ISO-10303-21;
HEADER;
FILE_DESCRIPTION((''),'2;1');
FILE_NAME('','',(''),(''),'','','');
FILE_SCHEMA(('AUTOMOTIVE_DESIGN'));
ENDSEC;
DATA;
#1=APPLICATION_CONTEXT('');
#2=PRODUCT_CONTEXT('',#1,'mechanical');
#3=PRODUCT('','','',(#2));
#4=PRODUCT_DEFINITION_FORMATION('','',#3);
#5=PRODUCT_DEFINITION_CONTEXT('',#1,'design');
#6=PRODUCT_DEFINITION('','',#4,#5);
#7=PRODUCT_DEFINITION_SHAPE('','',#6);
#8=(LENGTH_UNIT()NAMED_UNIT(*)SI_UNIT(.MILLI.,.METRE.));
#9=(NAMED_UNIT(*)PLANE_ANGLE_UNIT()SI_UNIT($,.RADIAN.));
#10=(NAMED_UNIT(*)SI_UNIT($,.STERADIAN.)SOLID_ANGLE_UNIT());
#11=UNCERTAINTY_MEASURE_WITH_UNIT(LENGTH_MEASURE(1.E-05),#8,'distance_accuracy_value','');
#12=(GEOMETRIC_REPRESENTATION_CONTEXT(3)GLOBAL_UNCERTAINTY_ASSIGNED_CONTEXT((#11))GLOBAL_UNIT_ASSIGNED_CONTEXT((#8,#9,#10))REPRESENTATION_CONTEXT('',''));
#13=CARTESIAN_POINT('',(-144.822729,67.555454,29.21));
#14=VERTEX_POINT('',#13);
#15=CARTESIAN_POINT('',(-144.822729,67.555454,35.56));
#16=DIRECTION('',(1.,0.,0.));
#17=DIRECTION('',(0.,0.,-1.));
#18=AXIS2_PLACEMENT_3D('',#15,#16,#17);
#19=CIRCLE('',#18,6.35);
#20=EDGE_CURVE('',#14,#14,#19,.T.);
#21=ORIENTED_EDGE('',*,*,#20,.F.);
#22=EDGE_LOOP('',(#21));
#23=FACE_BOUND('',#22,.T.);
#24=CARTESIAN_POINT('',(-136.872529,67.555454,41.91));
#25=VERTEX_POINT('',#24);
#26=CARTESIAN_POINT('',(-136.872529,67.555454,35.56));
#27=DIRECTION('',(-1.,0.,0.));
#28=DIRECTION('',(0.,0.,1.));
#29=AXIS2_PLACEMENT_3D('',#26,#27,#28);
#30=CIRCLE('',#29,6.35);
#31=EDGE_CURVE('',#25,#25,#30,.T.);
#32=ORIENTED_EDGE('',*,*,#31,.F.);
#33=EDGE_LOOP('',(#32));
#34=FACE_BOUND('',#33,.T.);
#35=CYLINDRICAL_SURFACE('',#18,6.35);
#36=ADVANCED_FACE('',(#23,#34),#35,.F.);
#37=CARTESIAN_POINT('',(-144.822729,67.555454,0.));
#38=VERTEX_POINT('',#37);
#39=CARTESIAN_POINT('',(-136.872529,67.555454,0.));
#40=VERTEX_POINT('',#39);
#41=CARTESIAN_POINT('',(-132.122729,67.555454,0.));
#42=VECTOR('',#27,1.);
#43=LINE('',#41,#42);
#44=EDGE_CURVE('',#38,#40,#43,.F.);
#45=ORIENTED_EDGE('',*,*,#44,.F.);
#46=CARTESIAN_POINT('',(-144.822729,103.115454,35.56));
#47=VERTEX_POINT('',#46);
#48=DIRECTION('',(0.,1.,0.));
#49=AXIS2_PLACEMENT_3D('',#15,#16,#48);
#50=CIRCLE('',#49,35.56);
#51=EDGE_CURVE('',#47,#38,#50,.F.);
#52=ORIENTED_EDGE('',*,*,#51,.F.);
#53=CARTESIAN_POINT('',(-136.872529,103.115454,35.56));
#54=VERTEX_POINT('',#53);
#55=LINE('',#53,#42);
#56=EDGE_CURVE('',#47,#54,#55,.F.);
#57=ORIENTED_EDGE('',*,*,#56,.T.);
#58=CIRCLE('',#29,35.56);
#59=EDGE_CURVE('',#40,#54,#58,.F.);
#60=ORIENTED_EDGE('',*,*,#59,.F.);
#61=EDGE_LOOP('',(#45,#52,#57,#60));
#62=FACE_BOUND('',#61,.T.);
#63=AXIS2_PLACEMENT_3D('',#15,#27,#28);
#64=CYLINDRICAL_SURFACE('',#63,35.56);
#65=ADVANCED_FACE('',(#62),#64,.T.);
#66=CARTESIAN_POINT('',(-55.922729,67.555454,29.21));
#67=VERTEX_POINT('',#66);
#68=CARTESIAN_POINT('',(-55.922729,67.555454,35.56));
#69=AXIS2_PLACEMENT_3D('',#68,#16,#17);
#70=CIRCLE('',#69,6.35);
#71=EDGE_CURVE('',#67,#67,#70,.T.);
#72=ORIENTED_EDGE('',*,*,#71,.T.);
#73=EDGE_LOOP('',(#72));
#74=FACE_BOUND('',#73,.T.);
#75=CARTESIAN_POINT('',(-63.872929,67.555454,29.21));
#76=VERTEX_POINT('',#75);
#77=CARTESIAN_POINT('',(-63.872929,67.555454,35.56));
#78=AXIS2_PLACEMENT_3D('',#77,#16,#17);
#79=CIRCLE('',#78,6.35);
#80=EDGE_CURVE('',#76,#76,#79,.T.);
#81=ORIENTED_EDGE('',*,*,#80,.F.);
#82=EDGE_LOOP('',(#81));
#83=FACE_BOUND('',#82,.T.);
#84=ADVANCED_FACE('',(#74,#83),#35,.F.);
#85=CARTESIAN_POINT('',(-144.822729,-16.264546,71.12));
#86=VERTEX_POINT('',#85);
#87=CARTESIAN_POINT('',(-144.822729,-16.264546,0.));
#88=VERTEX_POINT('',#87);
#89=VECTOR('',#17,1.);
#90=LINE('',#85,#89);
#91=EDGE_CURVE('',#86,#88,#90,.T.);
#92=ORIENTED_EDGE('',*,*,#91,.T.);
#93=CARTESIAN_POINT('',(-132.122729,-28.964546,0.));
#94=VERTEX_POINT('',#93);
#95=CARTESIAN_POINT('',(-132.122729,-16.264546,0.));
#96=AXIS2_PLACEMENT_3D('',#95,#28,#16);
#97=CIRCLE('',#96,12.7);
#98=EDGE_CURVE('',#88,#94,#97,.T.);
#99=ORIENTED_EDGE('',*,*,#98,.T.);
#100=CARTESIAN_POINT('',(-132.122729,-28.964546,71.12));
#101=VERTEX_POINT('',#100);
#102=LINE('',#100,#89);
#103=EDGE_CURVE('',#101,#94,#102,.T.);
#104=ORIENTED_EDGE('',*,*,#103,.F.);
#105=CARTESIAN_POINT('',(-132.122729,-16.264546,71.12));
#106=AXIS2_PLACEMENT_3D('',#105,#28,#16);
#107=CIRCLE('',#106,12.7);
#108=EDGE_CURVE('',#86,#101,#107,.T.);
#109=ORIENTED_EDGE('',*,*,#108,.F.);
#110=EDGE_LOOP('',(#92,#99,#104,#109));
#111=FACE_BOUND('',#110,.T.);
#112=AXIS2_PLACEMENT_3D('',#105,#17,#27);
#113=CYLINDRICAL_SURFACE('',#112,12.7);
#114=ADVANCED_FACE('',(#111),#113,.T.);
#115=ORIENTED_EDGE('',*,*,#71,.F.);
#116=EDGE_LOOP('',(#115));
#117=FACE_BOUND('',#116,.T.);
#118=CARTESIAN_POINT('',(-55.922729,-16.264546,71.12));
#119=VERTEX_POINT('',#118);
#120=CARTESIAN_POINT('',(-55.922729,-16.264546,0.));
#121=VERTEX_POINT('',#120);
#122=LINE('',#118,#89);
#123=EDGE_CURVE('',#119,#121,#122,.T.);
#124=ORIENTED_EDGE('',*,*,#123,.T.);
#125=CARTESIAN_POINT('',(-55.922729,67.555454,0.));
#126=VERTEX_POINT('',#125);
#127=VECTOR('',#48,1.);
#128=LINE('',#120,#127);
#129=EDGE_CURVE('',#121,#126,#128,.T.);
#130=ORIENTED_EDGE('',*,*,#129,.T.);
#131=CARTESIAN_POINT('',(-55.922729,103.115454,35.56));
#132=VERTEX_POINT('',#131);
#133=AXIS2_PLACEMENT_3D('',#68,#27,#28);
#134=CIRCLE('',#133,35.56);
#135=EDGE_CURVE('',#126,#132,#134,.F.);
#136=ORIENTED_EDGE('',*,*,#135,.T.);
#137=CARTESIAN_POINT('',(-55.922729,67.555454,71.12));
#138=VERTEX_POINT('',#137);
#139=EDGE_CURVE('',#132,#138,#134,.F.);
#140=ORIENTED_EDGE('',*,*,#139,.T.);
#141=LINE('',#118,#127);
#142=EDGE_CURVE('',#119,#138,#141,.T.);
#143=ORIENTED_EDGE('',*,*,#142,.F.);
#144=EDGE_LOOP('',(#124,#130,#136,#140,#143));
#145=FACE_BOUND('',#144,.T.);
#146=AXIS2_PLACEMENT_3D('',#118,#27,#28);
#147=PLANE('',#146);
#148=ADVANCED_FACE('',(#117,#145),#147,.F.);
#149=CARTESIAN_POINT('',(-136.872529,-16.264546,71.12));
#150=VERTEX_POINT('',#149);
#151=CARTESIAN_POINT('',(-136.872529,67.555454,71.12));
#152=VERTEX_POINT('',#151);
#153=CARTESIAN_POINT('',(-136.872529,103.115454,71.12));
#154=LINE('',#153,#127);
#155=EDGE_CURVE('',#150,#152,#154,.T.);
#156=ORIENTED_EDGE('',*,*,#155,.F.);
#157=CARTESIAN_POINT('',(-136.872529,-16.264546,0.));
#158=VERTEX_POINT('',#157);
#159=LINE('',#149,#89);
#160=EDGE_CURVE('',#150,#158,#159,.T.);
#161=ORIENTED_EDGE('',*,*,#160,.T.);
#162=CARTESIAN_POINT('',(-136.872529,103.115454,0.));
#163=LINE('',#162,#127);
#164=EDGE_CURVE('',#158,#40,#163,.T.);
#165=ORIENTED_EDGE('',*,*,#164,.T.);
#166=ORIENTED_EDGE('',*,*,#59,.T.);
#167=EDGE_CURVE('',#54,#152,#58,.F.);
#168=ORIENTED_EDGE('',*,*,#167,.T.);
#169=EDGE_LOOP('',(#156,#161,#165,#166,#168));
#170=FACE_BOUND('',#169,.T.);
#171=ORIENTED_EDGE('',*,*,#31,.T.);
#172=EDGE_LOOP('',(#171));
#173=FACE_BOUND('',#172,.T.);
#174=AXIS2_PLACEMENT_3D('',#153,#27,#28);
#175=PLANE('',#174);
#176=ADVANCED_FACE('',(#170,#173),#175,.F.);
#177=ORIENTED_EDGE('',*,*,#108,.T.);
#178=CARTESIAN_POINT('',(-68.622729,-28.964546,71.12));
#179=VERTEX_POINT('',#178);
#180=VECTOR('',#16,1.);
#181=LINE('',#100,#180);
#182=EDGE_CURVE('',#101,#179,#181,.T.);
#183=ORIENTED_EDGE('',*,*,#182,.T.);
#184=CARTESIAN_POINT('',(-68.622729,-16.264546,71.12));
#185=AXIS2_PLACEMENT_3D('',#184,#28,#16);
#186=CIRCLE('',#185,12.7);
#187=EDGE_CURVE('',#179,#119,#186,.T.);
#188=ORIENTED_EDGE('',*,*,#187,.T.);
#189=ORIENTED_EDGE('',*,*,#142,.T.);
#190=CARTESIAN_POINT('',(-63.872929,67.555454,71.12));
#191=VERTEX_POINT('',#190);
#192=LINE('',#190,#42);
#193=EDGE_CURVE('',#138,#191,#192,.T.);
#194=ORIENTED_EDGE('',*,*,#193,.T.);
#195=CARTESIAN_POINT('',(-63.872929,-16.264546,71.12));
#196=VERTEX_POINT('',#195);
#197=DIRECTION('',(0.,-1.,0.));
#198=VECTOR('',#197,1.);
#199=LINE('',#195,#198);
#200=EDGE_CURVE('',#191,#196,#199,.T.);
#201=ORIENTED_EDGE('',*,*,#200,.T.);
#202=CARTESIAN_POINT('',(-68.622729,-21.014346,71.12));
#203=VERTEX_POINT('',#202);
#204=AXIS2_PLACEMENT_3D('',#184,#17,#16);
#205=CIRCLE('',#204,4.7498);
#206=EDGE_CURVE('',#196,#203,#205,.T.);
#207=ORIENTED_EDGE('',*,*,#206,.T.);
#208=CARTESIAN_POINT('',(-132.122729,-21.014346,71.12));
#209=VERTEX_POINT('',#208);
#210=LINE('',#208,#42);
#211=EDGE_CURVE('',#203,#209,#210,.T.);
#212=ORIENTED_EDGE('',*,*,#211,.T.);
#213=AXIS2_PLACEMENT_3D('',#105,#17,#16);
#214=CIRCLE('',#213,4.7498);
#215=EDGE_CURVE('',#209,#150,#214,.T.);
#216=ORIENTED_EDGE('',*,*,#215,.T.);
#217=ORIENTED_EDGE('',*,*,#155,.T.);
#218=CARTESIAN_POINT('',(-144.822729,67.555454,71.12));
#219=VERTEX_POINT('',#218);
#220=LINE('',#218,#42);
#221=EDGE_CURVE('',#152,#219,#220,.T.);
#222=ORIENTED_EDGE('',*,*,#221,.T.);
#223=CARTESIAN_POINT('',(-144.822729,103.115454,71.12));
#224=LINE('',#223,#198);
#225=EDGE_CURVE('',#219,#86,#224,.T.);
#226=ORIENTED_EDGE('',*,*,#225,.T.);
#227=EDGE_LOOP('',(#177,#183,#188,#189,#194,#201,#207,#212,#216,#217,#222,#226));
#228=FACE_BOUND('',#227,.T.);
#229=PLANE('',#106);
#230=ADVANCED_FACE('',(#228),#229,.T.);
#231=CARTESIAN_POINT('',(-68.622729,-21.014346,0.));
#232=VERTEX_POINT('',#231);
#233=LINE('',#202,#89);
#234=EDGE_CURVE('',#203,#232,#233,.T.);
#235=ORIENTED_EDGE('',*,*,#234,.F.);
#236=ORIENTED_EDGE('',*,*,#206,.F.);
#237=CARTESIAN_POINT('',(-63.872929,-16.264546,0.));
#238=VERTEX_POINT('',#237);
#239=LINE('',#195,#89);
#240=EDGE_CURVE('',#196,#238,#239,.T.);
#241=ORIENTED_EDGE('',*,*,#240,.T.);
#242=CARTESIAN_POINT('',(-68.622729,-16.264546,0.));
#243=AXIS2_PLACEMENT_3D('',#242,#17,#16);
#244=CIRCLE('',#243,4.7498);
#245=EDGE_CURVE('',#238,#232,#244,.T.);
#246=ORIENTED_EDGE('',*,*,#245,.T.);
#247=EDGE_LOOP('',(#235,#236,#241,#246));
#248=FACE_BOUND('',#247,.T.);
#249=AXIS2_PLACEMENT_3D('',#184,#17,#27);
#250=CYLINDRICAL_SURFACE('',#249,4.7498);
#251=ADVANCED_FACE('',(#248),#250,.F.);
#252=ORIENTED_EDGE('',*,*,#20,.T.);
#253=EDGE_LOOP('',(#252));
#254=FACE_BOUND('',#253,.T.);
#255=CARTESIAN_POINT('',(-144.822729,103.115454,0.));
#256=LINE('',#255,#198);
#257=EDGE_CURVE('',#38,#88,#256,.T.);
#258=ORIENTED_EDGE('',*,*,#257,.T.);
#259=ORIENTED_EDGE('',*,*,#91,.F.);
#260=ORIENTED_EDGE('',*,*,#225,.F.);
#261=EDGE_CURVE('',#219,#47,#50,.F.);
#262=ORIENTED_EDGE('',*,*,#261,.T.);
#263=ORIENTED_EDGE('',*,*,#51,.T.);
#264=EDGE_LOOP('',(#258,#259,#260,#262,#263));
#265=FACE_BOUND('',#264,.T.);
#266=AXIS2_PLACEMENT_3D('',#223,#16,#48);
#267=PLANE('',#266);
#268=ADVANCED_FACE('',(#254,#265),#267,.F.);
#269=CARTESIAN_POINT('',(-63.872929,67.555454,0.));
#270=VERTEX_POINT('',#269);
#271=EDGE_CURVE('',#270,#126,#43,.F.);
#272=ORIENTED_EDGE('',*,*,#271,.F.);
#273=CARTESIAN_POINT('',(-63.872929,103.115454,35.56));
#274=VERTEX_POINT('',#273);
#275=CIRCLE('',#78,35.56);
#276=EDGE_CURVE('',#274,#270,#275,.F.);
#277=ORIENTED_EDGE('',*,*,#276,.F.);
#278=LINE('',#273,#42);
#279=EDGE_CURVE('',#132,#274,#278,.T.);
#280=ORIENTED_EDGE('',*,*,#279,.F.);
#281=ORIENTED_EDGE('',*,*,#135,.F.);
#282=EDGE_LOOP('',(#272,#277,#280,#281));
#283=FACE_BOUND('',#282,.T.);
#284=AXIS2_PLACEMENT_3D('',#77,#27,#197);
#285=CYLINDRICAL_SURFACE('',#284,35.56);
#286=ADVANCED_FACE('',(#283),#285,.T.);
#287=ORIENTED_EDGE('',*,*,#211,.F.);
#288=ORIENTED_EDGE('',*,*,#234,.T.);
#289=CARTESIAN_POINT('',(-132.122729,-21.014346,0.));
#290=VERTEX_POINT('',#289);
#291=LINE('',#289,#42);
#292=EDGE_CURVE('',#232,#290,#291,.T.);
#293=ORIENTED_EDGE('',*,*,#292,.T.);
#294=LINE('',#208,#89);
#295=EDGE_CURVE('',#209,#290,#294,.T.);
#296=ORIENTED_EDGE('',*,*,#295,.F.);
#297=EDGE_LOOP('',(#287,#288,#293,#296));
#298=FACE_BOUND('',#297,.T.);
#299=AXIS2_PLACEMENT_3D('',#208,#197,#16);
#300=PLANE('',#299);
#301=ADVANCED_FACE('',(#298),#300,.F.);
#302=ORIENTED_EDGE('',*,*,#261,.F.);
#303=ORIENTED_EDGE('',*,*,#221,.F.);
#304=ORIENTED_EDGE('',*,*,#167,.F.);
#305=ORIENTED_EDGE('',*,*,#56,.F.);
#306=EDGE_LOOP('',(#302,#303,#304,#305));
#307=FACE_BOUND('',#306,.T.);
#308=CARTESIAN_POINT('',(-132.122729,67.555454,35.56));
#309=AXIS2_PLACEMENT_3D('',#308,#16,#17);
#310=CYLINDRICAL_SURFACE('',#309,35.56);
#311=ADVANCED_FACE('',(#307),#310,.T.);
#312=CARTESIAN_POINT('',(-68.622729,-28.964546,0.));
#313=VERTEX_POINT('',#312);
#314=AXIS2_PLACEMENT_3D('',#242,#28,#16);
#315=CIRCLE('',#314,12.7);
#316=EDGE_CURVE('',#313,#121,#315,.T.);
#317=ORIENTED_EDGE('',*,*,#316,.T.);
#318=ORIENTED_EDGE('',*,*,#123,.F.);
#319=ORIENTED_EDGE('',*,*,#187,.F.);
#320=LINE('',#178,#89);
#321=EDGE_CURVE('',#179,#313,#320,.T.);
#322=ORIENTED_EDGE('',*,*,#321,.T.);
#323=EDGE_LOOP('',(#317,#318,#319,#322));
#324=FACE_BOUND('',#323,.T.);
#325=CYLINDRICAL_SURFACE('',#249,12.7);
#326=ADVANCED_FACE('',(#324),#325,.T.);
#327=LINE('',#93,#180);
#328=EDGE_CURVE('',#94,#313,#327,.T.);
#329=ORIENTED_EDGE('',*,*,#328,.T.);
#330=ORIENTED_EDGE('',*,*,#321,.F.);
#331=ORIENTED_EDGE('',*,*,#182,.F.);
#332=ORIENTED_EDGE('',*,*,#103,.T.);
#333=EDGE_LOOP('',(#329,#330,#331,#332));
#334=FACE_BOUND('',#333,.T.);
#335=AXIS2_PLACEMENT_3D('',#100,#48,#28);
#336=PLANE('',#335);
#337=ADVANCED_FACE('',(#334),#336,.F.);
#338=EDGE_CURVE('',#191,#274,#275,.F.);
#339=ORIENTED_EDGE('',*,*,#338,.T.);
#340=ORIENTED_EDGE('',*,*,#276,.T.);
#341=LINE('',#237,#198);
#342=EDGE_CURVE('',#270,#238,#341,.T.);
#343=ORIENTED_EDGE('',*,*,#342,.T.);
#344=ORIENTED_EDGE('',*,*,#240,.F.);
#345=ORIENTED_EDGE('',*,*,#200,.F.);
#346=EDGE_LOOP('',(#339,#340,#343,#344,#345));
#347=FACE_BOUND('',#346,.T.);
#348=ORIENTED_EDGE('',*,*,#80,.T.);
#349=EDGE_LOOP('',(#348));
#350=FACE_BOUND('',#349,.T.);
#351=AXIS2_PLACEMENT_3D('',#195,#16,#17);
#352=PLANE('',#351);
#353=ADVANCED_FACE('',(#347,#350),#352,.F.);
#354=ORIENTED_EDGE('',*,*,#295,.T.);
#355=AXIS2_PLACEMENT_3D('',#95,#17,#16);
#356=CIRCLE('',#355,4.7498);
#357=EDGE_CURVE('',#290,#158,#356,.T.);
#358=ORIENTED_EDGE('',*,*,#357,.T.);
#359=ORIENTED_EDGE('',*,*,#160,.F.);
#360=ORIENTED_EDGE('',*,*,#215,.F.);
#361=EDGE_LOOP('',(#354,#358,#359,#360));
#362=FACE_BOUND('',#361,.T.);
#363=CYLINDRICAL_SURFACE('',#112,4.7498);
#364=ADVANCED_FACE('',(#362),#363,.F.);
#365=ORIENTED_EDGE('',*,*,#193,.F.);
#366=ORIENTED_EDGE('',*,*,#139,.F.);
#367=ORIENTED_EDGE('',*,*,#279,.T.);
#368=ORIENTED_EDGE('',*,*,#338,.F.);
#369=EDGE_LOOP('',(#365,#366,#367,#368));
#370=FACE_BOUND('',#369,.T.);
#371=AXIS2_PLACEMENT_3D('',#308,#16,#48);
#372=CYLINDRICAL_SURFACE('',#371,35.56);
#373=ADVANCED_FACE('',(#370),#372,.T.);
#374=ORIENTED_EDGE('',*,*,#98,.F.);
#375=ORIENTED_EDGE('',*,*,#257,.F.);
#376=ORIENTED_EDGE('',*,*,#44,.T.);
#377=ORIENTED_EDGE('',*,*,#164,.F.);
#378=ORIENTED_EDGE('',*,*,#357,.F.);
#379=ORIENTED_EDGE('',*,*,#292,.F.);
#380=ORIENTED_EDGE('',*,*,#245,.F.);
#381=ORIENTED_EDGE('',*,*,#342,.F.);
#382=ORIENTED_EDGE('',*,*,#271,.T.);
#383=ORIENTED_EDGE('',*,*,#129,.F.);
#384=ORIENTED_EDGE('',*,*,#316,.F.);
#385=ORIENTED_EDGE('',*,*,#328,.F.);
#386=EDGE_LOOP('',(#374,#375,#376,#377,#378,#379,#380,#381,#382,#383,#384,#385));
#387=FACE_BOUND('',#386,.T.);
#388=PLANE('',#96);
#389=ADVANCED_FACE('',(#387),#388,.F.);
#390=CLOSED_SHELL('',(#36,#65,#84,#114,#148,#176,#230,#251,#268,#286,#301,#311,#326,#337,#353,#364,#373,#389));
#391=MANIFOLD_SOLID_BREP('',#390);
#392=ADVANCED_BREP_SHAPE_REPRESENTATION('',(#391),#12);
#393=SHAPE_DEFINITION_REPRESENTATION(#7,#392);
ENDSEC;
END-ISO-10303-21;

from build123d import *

# Parameters (mm, degrees)
BOSS_EXTRUDE3_DEPTH = 71.12
FILLET3_R           = 35.56
SKETCH6_R           = 6.35
CUT_EXTRUDE1_DEPTH  = 154.603584906


with BuildPart() as part:
    # Sketch1 → Boss-Extrude3 (new body)
    with BuildSketch(Plane.XY):
        with BuildLine():
            Line((-144.822728972, 103.115454206), (-144.822728972, -16.264545794))
            ThreePointArc((-144.822728972, -16.264545794), (-141.102985093, -25.244801915), (-132.122728972, -28.964545794))
            Line((-132.122728972, -28.964545794), (-68.622728972, -28.964545794))
            ThreePointArc((-68.622728972, -28.964545794), (-59.642472851, -25.244801915), (-55.922728972, -16.264545794))
            Line((-55.922728972, -16.264545794), (-55.922728972, 103.115454206))
            Line((-55.922728972, 103.115454206), (-63.872928972, 103.115454206))
            Line((-63.872928972, 103.115454206), (-63.872928972, -16.264545794))
            ThreePointArc((-63.872928972, -16.264545794), (-65.264113183, -19.623161584), (-68.622728972, -21.014345794))
            Line((-68.622728972, -21.014345794), (-132.122728972, -21.014345794))
            ThreePointArc((-132.122728972, -21.014345794), (-135.481344761, -19.623161584), (-136.872528972, -16.264545794))
            Line((-136.872528972, -16.264545794), (-136.872528972, 103.115454206))
            Line((-136.872528972, 103.115454206), (-144.822728972, 103.115454206))
        make_face()
    extrude(amount=BOSS_EXTRUDE3_DEPTH)

    # Fillet3
    fillet3_edges = [part.edges().sort_by_distance(p)[0] for p in [
        (-59.897828972, 103.115454206, 71.12),
        (-59.897828972, 103.115454206, 0),
        (-140.847628972, 103.115454206, 0),
        (-140.847628972, 103.115454206, 71.12),
    ]]
    fillet(fillet3_edges, radius=FILLET3_R - 0.0001)  # a hair under: the kernel refuses the full size

    # Sketch6 → Cut-Extrude1 (cut, through all)
    with BuildSketch(Plane(origin=(-55.922728972, 0, 0), x_dir=(0, 0, -1), z_dir=(1, 0, 0))):
        with Locations((-35.56, 67.555454206)):
            Circle(SKETCH6_R)
    extrude(amount=-CUT_EXTRUDE1_DEPTH, mode=Mode.SUBTRACT)


solid = part.part
